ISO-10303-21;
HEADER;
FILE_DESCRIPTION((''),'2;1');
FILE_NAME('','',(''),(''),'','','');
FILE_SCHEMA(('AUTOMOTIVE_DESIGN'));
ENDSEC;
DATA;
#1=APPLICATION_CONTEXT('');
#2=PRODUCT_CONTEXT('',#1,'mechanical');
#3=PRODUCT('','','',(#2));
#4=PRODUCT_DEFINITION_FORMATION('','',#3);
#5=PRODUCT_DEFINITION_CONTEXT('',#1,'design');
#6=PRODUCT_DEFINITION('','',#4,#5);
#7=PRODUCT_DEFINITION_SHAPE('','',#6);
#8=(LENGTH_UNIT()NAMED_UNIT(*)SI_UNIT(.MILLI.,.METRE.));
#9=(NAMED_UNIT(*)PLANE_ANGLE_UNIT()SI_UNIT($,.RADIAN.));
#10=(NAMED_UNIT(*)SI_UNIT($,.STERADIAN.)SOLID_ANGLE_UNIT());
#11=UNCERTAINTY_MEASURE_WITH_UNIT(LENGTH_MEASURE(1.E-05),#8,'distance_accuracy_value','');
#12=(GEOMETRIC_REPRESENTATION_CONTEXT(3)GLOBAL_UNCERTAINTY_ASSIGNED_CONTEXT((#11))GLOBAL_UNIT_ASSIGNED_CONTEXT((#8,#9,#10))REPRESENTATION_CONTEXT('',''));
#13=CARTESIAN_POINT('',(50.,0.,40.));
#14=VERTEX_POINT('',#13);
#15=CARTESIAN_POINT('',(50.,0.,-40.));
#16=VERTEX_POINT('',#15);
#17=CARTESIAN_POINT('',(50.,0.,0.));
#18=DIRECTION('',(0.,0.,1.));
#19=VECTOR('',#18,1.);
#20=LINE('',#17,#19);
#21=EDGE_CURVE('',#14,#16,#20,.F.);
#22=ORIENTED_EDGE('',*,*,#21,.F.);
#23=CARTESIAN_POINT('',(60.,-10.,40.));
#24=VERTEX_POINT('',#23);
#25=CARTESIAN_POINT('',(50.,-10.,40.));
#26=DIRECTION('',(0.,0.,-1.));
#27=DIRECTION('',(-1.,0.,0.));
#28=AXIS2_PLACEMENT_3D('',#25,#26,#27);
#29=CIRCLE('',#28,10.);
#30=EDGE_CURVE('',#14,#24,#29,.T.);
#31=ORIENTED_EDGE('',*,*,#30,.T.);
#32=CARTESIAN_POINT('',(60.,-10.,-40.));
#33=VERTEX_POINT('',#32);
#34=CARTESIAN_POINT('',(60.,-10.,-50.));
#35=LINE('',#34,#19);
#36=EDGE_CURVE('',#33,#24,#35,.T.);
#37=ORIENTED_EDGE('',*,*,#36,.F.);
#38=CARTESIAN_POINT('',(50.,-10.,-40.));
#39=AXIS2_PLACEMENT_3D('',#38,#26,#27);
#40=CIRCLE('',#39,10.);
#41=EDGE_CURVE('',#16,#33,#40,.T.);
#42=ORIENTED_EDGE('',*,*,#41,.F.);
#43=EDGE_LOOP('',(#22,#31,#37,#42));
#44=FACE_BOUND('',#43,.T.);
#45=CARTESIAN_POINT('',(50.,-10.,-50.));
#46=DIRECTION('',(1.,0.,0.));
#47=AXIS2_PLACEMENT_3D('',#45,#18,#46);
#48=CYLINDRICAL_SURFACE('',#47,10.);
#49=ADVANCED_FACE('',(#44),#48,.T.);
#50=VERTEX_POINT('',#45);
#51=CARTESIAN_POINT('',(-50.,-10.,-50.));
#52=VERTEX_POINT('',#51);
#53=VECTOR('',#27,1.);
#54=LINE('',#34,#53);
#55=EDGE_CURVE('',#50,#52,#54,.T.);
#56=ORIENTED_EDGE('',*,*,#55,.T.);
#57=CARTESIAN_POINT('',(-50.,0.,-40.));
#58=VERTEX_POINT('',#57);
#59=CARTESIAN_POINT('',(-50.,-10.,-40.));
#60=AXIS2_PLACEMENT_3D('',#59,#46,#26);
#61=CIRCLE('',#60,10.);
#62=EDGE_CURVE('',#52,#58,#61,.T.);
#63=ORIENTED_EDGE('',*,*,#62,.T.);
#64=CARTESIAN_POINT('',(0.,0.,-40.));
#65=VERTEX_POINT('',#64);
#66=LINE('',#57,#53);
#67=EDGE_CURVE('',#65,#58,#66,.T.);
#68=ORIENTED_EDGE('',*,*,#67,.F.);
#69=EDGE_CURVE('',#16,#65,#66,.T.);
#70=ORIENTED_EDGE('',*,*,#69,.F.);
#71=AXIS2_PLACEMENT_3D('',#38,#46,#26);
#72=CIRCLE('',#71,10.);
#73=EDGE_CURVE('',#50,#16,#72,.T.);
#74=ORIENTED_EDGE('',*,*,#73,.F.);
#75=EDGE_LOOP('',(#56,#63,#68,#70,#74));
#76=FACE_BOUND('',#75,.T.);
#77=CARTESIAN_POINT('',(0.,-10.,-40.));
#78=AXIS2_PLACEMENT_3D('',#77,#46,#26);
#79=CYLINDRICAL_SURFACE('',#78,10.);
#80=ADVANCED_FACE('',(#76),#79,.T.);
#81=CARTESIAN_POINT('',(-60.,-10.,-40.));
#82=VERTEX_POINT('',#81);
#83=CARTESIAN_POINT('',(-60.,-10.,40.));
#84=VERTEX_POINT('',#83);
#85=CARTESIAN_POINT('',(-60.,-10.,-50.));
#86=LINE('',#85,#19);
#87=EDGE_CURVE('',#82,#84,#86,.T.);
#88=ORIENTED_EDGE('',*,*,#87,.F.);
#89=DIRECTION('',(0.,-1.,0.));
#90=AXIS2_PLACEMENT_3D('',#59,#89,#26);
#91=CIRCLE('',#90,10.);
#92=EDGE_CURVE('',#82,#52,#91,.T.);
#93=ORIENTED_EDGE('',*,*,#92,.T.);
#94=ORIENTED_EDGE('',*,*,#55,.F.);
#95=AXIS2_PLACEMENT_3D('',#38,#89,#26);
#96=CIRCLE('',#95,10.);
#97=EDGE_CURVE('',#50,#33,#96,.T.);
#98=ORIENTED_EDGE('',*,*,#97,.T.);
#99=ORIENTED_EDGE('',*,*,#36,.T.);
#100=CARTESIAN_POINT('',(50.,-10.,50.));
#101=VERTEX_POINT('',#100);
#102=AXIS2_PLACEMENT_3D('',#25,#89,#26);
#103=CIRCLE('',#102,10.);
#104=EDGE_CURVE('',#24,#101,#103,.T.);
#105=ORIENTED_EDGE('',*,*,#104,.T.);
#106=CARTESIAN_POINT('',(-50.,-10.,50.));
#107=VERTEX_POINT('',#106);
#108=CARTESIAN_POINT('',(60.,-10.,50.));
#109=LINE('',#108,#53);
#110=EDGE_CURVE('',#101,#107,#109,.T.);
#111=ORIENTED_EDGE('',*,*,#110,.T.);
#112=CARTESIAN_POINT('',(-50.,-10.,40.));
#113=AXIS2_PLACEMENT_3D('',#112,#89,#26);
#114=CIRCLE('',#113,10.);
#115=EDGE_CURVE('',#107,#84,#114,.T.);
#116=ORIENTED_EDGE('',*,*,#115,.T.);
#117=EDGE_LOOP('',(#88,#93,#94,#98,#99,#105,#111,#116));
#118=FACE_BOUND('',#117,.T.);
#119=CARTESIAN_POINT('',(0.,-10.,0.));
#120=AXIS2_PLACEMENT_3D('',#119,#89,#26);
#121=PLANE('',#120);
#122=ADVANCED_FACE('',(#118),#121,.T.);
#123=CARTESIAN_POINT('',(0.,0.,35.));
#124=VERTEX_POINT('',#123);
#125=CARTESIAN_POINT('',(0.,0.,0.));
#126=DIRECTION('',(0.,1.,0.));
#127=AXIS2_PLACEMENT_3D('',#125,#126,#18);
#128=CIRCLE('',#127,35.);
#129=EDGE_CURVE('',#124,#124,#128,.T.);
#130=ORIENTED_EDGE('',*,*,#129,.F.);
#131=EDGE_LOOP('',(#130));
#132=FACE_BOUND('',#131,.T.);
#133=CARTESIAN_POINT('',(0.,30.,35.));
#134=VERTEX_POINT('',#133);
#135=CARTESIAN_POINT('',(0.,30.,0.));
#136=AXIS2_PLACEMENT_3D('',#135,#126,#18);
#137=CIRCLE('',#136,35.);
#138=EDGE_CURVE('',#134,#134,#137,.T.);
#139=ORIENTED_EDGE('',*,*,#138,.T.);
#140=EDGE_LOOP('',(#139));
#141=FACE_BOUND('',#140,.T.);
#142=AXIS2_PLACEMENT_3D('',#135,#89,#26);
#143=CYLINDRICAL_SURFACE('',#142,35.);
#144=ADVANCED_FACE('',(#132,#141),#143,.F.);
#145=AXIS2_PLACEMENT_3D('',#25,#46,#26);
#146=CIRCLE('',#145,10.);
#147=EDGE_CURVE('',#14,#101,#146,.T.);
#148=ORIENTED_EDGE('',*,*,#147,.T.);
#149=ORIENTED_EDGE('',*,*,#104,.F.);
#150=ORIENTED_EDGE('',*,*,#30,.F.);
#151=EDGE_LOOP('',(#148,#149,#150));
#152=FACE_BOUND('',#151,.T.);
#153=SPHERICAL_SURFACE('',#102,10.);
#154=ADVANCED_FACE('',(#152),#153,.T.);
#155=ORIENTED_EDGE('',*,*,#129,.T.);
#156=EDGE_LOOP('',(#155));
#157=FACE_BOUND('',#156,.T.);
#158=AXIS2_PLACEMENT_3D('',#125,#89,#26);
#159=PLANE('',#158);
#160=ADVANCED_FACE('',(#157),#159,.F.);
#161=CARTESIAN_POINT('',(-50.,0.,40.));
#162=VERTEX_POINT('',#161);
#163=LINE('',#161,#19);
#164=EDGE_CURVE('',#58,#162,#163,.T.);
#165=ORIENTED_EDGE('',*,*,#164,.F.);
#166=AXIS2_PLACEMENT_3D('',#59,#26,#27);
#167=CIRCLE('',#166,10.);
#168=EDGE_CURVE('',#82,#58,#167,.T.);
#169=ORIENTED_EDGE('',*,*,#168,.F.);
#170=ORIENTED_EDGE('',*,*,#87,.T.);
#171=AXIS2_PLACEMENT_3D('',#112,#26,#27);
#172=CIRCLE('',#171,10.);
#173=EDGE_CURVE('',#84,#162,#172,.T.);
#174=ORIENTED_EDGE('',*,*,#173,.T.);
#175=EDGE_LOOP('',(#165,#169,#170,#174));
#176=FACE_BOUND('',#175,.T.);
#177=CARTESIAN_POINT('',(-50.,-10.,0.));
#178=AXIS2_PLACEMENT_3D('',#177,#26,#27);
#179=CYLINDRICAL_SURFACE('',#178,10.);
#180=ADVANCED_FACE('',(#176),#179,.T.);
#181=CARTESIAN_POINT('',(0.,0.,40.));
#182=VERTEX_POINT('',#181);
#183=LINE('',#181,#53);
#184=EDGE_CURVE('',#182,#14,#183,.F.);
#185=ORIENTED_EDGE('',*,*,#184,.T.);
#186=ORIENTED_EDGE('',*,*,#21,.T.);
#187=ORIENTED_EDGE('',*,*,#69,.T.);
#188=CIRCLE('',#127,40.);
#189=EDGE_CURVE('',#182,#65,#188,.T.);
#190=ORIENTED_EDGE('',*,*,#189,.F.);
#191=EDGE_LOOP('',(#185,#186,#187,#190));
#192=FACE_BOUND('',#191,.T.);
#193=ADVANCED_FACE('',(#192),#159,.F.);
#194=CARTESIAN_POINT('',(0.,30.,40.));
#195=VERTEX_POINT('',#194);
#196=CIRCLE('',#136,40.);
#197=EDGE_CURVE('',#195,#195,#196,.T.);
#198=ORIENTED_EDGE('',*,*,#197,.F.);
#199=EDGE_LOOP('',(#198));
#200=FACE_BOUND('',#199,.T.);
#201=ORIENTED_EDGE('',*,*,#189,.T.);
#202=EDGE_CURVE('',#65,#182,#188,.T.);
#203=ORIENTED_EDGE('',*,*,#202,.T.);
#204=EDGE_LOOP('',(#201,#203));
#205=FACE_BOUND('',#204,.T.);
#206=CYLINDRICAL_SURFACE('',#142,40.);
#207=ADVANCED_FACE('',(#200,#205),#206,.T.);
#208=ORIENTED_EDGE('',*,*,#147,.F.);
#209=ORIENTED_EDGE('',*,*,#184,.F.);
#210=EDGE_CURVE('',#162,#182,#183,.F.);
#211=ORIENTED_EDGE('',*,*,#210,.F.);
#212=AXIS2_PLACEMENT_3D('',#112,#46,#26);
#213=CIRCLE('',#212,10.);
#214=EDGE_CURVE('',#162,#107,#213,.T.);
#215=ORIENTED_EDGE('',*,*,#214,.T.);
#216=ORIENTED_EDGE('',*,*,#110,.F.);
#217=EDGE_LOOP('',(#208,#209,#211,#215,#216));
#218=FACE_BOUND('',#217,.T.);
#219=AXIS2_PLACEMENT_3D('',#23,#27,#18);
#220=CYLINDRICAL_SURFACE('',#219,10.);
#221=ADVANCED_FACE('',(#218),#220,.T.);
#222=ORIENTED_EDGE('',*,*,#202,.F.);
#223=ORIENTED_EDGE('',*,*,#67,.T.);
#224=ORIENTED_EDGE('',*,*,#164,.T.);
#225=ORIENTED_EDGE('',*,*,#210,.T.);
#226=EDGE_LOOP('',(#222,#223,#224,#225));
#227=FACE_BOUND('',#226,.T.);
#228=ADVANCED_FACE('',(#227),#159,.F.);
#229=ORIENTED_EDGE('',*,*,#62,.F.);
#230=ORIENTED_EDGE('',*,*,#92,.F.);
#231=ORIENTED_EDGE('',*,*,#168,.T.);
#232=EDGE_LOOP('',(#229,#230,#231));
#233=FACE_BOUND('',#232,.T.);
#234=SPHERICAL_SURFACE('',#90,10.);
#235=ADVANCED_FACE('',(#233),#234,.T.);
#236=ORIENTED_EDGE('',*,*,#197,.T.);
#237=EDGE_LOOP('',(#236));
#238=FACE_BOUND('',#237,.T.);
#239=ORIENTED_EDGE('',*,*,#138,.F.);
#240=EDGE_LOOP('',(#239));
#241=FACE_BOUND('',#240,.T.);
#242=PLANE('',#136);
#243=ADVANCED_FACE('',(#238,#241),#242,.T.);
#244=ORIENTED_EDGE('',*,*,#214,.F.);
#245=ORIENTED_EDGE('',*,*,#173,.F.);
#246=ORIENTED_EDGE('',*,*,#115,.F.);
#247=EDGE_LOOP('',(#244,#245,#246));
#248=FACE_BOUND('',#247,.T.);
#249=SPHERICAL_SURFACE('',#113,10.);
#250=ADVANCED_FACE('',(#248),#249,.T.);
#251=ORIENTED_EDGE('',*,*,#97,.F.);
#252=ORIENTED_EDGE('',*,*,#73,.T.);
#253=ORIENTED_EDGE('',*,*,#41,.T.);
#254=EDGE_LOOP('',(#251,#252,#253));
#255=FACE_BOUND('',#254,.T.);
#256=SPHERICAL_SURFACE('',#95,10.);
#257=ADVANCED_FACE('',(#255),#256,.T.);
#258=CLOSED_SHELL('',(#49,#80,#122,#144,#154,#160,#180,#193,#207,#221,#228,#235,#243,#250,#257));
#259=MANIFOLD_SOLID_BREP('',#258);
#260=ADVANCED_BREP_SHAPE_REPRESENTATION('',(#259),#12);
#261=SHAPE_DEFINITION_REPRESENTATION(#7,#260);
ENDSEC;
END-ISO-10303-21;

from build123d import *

# Parameters (mm, degrees)
SKETCH1_R           = 40
SKETCH1_R_2         = 35
BOSS_EXTRUDE1_DEPTH = 30
SKETCH2_W           = 120
SKETCH2_H           = 100
BOSS_EXTRUDE2_DEPTH = 10
FILLET4_R           = 10
FILLET5_R           = 10


with BuildPart() as part:
    # Sketch1 → Boss-Extrude1 (new body)
    with BuildSketch(Plane(origin=(0, 0, 0), x_dir=(1, 0, 0), z_dir=(0, 1, 0))):
        with Locations(Location((0, 0, 0), (0, 0, 270))):
            Circle(SKETCH1_R)
        with Locations(Location((0, 0, 0), (0, 0, 270))):
            Circle(SKETCH1_R_2, mode=Mode.SUBTRACT)
    extrude(amount=BOSS_EXTRUDE1_DEPTH)

    # Sketch2 → Boss-Extrude2 (add)
    with BuildSketch(Plane.XZ):
        Rectangle(SKETCH2_W, SKETCH2_H)
    extrude(amount=BOSS_EXTRUDE2_DEPTH)

    # Fillet4
    fillet4_edges = [part.edges().sort_by_distance(p)[0] for p in [
        (60, -5, -50),
        (60, -5, 50),
        (-60, -5, 50),
        (-60, -5, -50),
    ]]
    fillet(fillet4_edges, radius=FILLET4_R)

    # Fillet5
    fillet5_edges = [part.edges().sort_by_distance(p)[0] for p in [
        (57.071067812, 0, -47.071067812),
        (0, 0, -50),
        (-57.071067812, 0, -47.071067812),
        (-60, 0, 0),
        (-57.071067812, 0, 47.071067812),
        (0, 0, 50),
        (57.071067812, 0, 47.071067812),
        (60, 0, 0),
    ]]
    fillet(fillet5_edges, radius=FILLET5_R - 0.0001)  # a hair under: the kernel refuses the full size


solid = part.part
